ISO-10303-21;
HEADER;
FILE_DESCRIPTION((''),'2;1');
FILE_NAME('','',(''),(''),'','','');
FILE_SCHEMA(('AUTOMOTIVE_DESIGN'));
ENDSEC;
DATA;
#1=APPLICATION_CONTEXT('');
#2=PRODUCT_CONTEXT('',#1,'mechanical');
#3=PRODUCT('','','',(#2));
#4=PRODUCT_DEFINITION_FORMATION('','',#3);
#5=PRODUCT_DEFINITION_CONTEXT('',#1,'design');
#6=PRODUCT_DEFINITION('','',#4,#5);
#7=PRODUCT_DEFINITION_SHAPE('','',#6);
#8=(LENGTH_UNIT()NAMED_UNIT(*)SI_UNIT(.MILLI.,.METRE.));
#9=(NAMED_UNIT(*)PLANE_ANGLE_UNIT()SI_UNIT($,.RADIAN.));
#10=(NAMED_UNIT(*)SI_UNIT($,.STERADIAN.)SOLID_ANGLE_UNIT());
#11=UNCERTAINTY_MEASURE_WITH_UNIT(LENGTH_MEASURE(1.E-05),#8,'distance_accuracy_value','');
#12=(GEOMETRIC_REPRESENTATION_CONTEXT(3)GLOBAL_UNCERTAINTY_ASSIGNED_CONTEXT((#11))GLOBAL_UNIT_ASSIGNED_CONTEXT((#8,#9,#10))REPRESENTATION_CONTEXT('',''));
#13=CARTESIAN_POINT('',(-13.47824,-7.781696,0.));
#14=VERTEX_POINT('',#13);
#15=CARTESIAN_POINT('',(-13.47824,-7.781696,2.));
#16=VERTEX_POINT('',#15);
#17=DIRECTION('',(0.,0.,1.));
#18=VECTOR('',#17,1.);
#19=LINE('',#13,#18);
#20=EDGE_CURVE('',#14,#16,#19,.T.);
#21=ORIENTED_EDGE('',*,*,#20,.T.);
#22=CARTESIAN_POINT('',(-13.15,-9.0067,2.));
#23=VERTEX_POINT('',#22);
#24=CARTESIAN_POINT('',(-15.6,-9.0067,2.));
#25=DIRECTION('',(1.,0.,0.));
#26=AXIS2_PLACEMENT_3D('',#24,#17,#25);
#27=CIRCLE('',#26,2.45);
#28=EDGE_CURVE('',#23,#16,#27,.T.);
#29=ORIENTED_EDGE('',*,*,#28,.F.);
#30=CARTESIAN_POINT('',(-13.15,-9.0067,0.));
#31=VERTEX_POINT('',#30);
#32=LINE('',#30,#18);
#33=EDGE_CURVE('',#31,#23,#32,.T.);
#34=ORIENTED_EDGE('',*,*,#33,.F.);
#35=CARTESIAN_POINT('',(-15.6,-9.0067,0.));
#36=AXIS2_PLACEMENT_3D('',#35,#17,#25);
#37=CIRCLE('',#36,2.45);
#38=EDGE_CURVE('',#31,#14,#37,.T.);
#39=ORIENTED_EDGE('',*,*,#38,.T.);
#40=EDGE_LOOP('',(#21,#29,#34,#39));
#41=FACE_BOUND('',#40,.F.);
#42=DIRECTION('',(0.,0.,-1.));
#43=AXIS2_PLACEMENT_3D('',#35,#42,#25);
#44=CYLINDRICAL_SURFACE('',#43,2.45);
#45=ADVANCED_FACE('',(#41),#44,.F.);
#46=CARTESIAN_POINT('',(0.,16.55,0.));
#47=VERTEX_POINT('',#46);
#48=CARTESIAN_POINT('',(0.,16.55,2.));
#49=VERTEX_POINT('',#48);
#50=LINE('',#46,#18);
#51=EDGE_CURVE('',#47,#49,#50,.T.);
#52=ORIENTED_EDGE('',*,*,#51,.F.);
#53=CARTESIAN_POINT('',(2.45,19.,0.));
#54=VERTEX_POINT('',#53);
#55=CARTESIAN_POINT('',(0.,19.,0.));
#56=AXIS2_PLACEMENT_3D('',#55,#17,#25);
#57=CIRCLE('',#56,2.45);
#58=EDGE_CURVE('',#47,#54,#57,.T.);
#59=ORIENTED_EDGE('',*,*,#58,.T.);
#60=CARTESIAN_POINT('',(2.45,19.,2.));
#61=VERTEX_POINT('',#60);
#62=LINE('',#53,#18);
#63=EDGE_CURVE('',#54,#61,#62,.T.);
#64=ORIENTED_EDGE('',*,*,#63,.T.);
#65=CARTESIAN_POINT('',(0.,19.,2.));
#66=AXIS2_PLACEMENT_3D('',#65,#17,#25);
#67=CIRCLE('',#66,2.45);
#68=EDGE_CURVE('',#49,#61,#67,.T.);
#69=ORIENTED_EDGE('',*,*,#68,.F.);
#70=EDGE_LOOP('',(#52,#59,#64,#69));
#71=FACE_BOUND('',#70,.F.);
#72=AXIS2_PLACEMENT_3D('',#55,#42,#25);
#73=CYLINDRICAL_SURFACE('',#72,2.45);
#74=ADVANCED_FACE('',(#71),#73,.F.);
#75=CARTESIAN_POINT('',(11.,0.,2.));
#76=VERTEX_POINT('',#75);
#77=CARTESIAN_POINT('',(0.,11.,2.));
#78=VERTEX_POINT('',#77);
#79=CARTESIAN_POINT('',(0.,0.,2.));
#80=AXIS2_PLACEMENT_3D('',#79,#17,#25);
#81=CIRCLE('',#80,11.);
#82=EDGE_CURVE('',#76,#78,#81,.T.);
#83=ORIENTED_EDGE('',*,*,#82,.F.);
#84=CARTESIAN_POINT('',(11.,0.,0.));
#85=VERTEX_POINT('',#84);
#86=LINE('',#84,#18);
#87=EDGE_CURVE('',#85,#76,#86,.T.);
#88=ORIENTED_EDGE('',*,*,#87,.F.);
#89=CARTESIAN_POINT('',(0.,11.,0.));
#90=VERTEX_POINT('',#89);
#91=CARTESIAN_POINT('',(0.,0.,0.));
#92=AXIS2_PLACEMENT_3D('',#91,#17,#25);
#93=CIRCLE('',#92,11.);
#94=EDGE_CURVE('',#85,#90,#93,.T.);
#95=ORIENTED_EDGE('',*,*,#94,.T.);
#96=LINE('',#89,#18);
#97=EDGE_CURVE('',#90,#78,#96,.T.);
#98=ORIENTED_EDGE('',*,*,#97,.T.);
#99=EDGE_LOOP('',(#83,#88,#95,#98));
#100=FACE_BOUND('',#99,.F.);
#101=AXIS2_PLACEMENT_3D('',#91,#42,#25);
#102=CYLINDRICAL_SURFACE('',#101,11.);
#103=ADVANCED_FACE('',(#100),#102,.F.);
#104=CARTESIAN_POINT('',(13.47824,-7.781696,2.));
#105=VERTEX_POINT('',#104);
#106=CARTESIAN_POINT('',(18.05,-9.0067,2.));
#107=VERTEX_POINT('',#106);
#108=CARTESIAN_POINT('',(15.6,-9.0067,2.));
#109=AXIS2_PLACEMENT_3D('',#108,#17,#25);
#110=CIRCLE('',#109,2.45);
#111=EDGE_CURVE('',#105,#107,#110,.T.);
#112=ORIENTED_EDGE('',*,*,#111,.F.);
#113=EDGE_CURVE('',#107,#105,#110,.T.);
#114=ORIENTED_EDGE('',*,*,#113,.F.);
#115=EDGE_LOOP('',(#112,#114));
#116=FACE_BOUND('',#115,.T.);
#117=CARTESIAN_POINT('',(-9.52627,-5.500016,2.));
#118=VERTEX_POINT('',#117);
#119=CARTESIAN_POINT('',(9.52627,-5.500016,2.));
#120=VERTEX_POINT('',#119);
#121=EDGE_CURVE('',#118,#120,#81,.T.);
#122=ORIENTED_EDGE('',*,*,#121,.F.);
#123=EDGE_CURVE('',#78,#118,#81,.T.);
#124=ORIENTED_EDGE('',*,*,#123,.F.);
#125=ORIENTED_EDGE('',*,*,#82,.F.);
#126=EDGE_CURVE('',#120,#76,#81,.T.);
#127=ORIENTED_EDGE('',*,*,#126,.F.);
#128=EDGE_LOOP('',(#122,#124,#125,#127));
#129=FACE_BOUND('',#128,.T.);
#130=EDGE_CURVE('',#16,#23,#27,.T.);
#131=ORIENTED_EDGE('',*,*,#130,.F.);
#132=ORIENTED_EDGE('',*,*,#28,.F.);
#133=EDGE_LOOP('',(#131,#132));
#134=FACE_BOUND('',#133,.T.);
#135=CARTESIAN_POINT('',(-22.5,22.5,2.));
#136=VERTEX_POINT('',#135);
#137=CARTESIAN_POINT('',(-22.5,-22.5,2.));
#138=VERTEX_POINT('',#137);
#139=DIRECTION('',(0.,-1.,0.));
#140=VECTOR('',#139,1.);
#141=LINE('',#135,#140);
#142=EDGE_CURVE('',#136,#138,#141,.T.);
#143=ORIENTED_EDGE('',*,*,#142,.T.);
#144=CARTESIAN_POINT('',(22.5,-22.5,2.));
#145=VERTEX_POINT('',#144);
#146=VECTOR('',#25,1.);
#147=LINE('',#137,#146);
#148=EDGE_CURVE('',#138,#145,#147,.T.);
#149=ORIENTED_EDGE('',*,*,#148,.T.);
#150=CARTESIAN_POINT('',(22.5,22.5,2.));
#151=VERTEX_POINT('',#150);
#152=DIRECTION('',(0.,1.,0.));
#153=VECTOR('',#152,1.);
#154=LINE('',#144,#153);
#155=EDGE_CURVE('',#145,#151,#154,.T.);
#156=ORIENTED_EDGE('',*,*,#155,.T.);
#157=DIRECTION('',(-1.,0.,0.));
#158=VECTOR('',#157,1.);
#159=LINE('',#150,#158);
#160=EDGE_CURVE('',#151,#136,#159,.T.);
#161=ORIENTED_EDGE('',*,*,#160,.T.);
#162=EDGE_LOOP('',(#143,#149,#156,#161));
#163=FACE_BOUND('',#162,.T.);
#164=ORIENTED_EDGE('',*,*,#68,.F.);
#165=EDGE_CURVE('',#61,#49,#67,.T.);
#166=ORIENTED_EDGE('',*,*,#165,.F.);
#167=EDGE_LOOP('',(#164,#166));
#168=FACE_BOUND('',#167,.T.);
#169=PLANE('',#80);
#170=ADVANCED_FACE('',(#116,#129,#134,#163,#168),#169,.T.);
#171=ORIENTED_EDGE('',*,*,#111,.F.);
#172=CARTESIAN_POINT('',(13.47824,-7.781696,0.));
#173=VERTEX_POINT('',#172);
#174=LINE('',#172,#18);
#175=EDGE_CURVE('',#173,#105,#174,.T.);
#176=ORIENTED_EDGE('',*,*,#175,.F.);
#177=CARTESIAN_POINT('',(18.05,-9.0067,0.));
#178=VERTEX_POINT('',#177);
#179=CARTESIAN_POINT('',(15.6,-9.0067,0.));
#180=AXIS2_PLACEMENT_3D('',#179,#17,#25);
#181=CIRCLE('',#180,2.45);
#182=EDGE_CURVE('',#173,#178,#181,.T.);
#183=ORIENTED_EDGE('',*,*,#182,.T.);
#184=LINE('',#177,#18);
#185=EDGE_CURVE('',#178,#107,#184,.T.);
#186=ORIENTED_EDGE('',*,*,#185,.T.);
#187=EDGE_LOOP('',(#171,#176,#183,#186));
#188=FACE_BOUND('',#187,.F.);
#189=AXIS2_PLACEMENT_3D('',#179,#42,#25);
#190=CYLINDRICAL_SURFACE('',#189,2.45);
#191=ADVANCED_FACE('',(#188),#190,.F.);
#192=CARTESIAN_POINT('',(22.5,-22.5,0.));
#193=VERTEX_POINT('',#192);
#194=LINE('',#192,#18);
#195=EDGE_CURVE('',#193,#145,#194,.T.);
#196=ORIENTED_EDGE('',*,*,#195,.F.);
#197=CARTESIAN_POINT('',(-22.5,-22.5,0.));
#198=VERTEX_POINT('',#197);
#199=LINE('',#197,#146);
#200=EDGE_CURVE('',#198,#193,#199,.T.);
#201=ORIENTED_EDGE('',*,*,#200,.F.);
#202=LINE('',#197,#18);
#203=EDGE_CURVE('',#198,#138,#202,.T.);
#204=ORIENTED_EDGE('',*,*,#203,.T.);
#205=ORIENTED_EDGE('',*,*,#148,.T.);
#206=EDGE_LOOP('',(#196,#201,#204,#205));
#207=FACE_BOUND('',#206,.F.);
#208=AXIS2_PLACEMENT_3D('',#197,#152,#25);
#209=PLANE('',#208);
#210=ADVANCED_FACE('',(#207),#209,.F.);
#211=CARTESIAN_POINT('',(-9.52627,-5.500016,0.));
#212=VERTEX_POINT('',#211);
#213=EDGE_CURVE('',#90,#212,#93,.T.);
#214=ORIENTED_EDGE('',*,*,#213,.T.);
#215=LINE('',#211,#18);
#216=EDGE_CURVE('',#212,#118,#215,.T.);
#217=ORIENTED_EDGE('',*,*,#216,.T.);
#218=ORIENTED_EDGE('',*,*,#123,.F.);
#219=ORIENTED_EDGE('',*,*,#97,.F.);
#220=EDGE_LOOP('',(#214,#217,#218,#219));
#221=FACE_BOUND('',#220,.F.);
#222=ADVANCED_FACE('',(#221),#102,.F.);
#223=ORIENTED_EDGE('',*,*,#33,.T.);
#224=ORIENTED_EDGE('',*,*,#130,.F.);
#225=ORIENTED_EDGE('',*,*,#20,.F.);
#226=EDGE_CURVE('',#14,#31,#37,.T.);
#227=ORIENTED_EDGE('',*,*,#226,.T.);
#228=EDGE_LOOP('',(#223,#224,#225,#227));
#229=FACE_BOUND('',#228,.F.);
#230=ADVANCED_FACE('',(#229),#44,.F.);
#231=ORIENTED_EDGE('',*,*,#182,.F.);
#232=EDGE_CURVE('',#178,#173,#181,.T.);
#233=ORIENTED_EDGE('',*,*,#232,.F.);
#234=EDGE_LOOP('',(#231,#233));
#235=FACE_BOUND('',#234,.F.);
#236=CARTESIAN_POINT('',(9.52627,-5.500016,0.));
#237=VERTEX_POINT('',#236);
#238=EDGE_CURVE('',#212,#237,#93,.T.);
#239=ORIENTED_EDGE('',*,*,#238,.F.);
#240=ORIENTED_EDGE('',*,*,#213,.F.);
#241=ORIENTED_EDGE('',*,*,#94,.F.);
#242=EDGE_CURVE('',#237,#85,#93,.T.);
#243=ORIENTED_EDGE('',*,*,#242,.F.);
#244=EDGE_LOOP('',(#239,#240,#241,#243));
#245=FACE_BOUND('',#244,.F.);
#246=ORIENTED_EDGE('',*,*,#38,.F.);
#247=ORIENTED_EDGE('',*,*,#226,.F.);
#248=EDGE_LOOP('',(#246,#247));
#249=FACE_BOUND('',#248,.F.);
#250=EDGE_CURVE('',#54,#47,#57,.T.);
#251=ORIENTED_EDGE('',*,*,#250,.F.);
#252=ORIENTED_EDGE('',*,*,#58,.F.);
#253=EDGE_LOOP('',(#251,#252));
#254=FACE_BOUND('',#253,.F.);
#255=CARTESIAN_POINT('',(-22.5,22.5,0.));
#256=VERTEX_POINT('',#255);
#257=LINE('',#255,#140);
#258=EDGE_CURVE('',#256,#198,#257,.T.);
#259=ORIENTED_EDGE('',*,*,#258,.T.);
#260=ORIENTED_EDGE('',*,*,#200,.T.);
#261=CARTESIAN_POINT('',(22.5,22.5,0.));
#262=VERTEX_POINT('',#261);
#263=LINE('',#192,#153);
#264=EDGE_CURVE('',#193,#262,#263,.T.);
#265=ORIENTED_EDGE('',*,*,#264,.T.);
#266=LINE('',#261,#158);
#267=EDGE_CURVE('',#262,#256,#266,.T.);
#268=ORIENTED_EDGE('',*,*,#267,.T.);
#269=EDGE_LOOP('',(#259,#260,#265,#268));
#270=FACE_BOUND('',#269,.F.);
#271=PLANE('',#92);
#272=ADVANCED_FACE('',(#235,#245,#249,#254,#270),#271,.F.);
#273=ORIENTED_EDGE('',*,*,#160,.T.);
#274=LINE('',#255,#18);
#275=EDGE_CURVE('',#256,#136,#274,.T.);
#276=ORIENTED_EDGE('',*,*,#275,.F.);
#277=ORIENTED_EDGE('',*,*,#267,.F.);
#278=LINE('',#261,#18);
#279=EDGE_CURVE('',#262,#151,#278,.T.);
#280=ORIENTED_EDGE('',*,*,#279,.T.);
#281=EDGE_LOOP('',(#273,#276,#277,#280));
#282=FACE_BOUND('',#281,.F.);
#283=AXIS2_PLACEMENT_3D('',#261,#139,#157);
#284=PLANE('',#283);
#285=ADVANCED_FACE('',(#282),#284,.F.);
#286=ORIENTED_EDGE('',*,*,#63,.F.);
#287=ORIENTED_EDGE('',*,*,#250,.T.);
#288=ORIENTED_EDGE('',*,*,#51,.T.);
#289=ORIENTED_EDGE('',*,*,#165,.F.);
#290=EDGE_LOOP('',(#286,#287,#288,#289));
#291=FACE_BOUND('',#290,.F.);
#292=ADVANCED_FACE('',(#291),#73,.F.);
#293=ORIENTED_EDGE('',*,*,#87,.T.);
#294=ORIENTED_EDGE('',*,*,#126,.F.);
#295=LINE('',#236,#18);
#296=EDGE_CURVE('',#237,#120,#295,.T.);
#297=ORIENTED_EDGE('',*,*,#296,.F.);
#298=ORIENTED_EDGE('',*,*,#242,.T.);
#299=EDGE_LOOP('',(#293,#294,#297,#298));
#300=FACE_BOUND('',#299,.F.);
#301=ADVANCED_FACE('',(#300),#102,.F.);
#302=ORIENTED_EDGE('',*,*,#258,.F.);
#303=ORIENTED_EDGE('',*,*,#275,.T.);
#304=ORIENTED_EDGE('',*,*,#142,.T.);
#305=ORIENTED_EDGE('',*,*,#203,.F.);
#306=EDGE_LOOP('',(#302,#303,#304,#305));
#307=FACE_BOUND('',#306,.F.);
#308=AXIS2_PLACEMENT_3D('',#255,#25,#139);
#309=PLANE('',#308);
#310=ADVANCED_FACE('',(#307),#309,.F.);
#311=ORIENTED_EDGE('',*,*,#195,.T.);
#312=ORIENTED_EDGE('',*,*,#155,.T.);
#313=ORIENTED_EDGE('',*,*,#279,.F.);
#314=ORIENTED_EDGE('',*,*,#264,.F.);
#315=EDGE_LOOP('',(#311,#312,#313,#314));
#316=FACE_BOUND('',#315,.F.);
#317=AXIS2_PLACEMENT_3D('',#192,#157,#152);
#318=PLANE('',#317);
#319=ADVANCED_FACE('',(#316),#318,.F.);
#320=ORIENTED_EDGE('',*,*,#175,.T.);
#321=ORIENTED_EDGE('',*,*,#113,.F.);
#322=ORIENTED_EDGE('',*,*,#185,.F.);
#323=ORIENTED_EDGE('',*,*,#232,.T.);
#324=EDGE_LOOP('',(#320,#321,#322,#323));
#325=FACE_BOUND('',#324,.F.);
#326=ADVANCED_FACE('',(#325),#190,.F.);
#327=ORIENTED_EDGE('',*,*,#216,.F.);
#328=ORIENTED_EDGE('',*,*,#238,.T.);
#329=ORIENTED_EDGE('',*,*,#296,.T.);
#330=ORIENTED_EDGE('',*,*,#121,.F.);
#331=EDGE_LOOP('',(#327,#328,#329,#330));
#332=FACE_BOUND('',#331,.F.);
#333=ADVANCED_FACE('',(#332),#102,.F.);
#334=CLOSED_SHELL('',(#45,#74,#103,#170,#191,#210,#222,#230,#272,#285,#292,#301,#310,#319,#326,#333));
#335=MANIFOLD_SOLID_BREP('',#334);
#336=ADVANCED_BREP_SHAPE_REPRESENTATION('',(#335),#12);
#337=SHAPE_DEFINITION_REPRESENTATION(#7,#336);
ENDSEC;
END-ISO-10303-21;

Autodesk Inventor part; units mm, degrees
ref_plane "YZ Plane" through (0, 0, 0) normal (1, 0, 0) x (0, 1, 0)
ref_plane "XZ Plane" through (0, 0, 0) normal (0, 1, 0) x (-1, 0, 0)
ref_plane "XY Plane" through (0, 0, 0) normal (0, 0, 1) x (1, 0, 0)
sketch "Sketch1" plane through (0, 0, 0) normal (0, 0, 1) x (1, 0, 0)
  line L0 (-22.5, -22.5) -> (22.5, -22.5)
  line L1 (22.5, -22.5) -> (22.5, 22.5)
  line L2 (22.5, 22.5) -> (-22.5, 22.5)
  line L3 (-22.5, 22.5) -> (-22.5, -22.5)
  line L4 (-22.5, -22.5) -> (22.5, 22.5) construction
  line L5 (22.5, -22.5) -> (-22.5, 22.5) construction
  circle A0 centre (0, 0) radius 11
  line L6 (0, 0) -> (0, 19)
  line L7 (0, 0) -> (15.6, -9.0067)
  line L8 (0, 0) -> (-15.6, -9.0067)
  circle A1 centre (0, 19) radius 2.45
  circle A2 centre (15.6, -9.0067) radius 2.45
  circle A3 centre (-15.6, -9.0067) radius 2.45
  point P0 (22.5, -11.0947)
  point P1 (-22.5, -11.0947)
  dimension "d0" = 45
  dimension "d1" = 45
  dimension "d2" = 22
  dimension "d3" = 19
  dimension "d4" = 15.6
  dimension "d5" = 120
  dimension "d6" = 15.6
  dimension "d7" = 120
  dimension "d8" = 4.9
  dimension "d9" = 4.9
  dimension "d10" = 4.9
extrude "Extrusion2" add sketch "Sketch1" along normal blind 2
equation "\"d1\" = d0"
equation "\"d4\" = d6"
equation "\"d7\" = d5"
equation "\"d9\" = d8"
equation "\"d10\" = d8"
properties part number "mount_v07"
